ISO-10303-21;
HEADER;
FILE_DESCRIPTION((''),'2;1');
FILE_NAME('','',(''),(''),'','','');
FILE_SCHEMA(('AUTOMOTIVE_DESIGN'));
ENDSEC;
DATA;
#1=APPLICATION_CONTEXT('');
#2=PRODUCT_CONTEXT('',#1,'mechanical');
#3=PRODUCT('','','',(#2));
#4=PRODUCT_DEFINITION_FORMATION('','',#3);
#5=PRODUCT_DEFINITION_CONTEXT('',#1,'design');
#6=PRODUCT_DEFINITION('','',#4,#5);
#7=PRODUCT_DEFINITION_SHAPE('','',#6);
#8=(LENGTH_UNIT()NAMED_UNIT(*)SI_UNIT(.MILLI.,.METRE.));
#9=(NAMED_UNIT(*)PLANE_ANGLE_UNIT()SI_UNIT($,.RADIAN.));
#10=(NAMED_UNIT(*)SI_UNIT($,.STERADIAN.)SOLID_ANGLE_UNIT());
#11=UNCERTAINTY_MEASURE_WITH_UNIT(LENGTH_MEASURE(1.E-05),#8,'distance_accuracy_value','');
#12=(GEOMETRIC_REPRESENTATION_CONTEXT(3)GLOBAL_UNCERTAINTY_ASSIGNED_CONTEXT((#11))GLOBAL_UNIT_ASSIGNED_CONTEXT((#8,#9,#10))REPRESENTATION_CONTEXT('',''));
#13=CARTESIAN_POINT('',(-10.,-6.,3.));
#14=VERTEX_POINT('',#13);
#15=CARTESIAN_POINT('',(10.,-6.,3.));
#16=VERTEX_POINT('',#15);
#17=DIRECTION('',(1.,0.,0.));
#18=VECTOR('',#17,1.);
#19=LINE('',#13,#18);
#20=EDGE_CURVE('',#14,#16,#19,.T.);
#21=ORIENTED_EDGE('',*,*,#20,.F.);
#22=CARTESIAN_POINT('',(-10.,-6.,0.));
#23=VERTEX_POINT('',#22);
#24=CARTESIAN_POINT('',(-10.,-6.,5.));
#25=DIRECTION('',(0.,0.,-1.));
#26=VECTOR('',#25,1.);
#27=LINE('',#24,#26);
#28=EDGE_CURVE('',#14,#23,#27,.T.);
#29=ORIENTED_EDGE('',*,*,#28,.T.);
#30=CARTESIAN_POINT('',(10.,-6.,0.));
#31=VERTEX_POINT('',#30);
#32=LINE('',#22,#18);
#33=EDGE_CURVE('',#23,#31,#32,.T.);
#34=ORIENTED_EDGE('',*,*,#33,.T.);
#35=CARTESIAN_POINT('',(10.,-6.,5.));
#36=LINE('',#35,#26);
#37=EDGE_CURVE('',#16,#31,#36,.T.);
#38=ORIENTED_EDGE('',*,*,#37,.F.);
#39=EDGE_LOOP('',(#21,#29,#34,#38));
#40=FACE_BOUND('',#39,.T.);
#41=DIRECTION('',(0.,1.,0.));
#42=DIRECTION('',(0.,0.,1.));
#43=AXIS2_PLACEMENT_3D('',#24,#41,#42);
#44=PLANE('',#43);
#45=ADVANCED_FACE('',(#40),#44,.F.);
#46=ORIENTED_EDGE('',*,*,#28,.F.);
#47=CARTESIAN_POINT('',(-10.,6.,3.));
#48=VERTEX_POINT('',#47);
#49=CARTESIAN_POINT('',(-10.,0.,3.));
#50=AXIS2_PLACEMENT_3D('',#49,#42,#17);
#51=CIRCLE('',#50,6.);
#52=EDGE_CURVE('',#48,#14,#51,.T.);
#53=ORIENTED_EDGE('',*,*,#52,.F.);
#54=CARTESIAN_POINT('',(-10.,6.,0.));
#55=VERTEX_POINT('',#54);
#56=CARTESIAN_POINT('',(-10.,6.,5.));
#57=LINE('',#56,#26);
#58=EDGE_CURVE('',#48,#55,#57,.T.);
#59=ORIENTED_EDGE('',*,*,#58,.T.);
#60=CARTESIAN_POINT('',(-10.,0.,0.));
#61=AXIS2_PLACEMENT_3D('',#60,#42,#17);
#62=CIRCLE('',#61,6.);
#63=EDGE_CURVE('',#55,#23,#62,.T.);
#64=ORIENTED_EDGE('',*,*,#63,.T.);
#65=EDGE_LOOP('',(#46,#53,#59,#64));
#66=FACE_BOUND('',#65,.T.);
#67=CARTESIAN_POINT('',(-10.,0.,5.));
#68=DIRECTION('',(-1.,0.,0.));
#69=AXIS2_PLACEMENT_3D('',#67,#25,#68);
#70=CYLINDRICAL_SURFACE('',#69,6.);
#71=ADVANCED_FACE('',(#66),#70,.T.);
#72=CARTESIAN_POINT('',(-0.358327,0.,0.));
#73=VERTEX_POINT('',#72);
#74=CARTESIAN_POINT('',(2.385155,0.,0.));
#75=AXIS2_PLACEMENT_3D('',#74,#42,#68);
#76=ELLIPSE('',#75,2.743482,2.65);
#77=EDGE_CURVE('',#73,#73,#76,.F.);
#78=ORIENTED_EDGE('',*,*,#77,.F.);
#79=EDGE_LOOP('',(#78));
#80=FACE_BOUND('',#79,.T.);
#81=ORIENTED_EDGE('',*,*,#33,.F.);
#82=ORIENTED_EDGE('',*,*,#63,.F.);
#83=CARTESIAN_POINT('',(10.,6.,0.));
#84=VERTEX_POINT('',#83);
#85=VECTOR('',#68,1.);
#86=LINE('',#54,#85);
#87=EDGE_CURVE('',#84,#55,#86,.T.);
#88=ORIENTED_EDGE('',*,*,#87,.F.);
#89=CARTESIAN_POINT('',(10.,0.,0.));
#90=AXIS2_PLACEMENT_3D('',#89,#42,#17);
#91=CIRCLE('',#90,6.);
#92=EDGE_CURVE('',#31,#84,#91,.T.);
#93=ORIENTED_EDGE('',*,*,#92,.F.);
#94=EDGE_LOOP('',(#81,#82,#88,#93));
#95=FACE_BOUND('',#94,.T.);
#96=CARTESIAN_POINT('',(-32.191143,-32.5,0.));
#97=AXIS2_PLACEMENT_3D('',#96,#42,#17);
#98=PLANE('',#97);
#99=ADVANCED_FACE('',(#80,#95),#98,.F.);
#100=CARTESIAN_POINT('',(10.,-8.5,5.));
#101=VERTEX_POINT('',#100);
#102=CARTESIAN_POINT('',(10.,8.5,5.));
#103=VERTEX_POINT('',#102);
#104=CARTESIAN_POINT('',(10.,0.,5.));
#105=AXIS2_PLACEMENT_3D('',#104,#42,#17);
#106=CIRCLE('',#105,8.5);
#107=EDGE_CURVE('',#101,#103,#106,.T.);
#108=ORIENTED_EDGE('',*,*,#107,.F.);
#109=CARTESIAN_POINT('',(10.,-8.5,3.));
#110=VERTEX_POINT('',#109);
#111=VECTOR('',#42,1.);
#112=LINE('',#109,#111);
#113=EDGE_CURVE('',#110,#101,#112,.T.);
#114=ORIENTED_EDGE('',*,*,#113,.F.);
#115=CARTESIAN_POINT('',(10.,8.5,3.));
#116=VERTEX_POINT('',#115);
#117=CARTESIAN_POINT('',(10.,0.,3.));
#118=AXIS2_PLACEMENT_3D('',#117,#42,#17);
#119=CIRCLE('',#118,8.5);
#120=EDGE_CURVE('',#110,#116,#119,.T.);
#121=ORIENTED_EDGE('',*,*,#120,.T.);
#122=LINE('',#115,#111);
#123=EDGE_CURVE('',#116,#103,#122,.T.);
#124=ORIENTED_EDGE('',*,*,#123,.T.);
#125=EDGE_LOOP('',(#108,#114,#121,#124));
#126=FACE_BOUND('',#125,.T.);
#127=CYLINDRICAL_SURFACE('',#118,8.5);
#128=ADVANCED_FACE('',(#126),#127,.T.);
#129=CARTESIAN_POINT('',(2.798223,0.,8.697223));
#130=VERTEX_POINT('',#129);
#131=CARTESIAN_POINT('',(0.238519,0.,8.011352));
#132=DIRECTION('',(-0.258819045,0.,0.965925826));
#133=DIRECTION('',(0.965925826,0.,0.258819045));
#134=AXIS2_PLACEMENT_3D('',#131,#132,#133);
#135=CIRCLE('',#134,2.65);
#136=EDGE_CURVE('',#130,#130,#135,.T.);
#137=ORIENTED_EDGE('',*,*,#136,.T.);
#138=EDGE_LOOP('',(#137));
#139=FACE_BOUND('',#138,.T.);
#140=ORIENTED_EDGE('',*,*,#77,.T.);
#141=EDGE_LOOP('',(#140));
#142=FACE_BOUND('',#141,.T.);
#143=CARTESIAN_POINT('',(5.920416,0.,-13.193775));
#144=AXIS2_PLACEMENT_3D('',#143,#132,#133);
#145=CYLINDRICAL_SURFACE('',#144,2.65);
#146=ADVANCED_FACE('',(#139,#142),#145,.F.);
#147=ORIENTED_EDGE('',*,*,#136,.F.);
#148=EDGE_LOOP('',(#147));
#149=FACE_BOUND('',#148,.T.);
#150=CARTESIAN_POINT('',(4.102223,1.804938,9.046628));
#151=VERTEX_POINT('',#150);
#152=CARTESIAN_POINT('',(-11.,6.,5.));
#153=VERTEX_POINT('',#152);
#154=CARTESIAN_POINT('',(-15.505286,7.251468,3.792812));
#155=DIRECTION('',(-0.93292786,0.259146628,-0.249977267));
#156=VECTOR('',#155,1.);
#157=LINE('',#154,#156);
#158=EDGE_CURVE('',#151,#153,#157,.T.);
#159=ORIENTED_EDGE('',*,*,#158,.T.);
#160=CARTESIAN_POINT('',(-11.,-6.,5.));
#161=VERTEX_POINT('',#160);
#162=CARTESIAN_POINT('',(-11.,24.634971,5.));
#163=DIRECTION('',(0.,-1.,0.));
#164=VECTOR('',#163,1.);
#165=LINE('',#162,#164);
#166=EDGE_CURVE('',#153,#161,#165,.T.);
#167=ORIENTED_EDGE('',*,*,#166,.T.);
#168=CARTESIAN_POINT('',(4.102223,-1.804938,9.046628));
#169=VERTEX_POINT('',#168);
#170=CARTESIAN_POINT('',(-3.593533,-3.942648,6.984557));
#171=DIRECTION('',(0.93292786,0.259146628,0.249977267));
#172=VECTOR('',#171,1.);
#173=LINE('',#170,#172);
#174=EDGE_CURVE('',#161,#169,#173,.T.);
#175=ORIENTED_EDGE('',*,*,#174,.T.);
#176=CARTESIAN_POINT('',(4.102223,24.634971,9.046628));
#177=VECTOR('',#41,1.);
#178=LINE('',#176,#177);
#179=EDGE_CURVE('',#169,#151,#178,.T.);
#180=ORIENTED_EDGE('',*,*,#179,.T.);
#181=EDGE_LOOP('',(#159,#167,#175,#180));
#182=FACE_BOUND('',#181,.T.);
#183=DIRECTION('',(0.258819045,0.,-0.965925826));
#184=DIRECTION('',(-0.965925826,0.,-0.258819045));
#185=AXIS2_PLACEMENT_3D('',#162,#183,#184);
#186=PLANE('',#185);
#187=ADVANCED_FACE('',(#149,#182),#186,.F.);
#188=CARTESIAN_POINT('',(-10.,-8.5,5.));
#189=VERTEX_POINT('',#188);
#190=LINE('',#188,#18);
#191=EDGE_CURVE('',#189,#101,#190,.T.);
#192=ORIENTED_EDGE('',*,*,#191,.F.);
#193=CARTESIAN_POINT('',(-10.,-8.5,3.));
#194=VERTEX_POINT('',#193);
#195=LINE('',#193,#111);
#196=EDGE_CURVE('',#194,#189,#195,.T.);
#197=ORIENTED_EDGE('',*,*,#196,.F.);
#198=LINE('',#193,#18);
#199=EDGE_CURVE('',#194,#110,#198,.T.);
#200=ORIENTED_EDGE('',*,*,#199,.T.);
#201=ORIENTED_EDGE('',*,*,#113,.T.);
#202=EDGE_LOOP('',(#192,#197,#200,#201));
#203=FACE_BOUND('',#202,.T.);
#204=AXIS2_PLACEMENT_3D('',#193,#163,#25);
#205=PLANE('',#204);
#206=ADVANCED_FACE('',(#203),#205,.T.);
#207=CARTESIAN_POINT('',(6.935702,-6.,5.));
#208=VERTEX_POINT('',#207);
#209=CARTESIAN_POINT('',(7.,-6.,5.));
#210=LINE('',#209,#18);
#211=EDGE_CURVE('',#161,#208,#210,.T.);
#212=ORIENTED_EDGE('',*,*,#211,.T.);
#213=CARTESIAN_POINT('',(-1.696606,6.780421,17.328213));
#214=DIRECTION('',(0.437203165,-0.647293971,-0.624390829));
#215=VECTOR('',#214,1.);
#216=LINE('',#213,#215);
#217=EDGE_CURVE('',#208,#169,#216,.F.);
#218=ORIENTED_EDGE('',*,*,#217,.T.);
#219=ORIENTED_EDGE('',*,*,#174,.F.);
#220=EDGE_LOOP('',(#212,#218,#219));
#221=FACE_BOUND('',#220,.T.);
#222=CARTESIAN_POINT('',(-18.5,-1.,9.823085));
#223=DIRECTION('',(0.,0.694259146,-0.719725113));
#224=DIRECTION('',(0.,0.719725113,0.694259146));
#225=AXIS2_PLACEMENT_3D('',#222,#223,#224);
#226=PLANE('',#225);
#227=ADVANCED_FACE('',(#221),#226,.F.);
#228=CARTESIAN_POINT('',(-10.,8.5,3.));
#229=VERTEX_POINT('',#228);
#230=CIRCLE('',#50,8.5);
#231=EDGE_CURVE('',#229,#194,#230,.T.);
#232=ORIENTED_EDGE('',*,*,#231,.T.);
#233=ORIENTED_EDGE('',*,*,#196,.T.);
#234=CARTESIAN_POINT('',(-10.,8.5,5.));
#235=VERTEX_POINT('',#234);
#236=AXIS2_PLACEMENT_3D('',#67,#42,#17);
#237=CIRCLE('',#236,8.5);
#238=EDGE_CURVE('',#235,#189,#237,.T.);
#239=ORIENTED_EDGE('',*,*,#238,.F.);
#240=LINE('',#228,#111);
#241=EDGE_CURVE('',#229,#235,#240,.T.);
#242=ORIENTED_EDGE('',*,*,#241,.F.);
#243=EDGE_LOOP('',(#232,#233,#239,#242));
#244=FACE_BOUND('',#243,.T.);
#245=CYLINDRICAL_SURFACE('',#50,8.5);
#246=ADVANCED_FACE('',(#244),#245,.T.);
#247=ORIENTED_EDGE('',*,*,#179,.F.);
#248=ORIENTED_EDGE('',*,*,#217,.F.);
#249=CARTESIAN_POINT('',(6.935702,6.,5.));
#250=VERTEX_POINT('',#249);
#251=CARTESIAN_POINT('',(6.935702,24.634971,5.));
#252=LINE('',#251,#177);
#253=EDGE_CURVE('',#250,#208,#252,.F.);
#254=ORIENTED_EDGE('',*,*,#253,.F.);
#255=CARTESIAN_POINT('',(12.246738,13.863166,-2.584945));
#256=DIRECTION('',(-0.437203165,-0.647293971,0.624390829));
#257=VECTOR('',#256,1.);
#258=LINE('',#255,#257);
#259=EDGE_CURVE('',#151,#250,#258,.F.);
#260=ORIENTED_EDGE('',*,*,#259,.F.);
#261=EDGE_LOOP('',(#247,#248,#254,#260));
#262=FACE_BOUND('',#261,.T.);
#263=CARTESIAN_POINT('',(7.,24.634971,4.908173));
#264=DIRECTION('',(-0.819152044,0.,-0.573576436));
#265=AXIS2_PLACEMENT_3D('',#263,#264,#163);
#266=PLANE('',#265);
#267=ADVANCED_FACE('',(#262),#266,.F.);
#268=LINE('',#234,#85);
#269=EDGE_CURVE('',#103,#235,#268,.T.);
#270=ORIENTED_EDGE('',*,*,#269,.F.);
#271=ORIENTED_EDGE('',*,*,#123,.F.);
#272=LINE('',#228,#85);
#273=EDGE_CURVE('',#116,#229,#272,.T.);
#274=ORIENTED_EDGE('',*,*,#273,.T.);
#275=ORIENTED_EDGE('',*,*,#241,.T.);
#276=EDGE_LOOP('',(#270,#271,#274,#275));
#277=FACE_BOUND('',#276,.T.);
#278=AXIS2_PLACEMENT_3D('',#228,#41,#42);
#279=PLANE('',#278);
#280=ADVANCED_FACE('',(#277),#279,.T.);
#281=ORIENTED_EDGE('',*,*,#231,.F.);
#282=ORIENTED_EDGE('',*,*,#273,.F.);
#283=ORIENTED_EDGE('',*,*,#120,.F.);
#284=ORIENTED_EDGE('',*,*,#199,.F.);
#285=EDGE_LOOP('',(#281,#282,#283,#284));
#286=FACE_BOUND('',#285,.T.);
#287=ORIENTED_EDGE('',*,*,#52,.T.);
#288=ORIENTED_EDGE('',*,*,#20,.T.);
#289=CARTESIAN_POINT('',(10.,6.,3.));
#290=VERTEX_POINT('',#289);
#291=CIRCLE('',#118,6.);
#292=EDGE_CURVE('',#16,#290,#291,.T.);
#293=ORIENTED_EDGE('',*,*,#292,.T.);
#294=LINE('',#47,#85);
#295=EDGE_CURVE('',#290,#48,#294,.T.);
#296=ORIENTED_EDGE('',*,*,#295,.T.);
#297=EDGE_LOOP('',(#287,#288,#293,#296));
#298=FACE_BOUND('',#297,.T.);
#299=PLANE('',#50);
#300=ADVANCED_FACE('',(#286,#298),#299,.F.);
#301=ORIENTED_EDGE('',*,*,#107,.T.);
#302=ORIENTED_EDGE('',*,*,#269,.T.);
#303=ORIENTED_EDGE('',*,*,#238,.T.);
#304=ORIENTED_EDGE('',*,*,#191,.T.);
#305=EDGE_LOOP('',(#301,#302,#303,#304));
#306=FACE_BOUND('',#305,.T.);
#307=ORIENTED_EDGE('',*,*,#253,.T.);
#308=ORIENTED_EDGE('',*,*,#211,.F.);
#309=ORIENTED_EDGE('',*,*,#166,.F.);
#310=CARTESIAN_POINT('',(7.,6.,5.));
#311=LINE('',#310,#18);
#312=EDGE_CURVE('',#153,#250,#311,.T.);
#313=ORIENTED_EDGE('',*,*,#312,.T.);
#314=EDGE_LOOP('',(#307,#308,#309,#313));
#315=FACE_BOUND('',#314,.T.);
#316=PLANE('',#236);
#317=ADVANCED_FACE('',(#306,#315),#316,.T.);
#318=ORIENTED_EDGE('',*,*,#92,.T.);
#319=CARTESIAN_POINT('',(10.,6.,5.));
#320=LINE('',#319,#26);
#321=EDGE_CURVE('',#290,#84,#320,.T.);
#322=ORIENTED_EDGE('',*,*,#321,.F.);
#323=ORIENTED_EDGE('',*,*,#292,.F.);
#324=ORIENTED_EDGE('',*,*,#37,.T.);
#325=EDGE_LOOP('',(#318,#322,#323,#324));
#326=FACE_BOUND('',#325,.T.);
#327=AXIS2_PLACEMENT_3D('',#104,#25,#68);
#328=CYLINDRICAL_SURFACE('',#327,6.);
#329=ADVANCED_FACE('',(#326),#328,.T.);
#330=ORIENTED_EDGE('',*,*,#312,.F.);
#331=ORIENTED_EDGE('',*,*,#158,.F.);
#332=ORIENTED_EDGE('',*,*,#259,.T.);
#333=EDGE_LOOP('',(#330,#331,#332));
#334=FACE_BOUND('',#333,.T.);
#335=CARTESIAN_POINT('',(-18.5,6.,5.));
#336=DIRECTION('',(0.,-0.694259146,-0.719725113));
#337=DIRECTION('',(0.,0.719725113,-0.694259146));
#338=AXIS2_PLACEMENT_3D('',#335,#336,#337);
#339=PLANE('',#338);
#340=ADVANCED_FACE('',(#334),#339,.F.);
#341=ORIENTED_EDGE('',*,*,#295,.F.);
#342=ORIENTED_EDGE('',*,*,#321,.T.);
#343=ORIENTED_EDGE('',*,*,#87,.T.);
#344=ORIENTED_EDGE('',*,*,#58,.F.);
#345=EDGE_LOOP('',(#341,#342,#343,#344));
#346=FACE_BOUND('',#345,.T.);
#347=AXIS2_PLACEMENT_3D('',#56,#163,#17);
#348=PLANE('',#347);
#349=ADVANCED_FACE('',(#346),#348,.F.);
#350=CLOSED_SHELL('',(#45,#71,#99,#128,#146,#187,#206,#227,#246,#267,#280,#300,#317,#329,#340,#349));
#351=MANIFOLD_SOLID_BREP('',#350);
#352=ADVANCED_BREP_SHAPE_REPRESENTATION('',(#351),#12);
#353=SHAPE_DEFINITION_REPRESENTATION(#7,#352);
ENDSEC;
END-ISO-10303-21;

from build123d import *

# Parameters (mm, degrees)
BOSS_EXTRUDE1_DEPTH             = 5
BOSS_EXTRUDE2_REACH             = 19.804
BOSS_EXTRUDE2_DIRECTION_2_REACH = 19.804
BOSS_EXTRUDE3_DEPTH             = 2
SKETCH4_R                       = 2.65
CUT_EXTRUDE1_DEPTH              = 29.091194779
SKETCH9_W                       = 64.865756982
SKETCH9_H                       = 28.956889813
CUT_EXTRUDE2_DEPTH              = 32.5
CUT_EXTRUDE3_DEPTH              = 29.618053883
CHAMFER3_SIZE                   = 3
CHAMFER3_SIZE_2                 = 4.914912266


with BuildPart() as part:
    # Sketch2 → Boss-Extrude1 (new, symmetric)
    with BuildSketch(Plane.XY):
        with BuildLine():
            Line((-10, 6), (10, 6))
            ThreePointArc((10, 6), (16, 0), (10, -6))
            Line((10, -6), (-10, -6))
            ThreePointArc((-10, -6), (-16, 0), (-10, 6))
        make_face()
    extrude(amount=BOSS_EXTRUDE1_DEPTH, both=True)

    # Boss-Extrude2: up to this face of the body (flat: up to its plane)
    boss_extrude2_end = Plane(part.part.faces().sort_by_distance((0, 6, 0))[0])
    # Sketch3 → Boss-Extrude2 (add, up to the picked face)
    with BuildSketch(Plane(origin=(0, 0, 0), x_dir=(1, 0, 0), z_dir=(0, 1, 0)), mode=Mode.PRIVATE) as boss_extrude2_sk1:
        Polygon((-5, 5), (-5, 9.823085464), (13, 5), align=None)
    boss_extrude2_tool1 = split(extrude(boss_extrude2_sk1.sketch, amount=BOSS_EXTRUDE2_REACH, mode=Mode.PRIVATE), bisect_by=boss_extrude2_end, keep=Keep.BOTH, mode=Mode.PRIVATE)
    # Sketch3 → Boss-Extrude2 (add, up to the picked face)
    with BuildSketch(Plane(origin=(0, 0, 0), x_dir=(1, 0, 0), z_dir=(0, 1, 0)), mode=Mode.PRIVATE) as boss_extrude2_sk2:
        Polygon((-11, -5), (7, -9.823085464), (7, -5), align=None)
    boss_extrude2_tool2 = split(extrude(boss_extrude2_sk2.sketch, amount=BOSS_EXTRUDE2_REACH, mode=Mode.PRIVATE), bisect_by=boss_extrude2_end, keep=Keep.BOTH, mode=Mode.PRIVATE)
    add(boss_extrude2_tool1.solids().sort_by(Axis((1, 0, -6.607695), (0, 1, 0)))[0])
    add(boss_extrude2_tool2.solids().sort_by(Axis((1, 0, 6.607695), (0, 1, 0)))[0])

    # Boss-Extrude2 direction 2: up to this face of the body (flat: up to its plane)
    boss_extrude2_direction_2_end = Plane(part.part.faces().sort_by_distance((0, -6, 0))[0])
    # Sketch3 → Boss-Extrude2 direction 2 (add, up to the picked face)
    with BuildSketch(Plane(origin=(0, 0, 0), x_dir=(1, 0, 0), z_dir=(0, 1, 0)), mode=Mode.PRIVATE) as boss_extrude2_direction_2_sk1:
        Polygon((-5, 5), (-5, 9.823085464), (13, 5), align=None)
    boss_extrude2_direction_2_tool1 = split(extrude(boss_extrude2_direction_2_sk1.sketch, amount=-BOSS_EXTRUDE2_DIRECTION_2_REACH, mode=Mode.PRIVATE), bisect_by=boss_extrude2_direction_2_end, keep=Keep.BOTH, mode=Mode.PRIVATE)
    # Sketch3 → Boss-Extrude2 direction 2 (add, up to the picked face)
    with BuildSketch(Plane(origin=(0, 0, 0), x_dir=(1, 0, 0), z_dir=(0, 1, 0)), mode=Mode.PRIVATE) as boss_extrude2_direction_2_sk2:
        Polygon((-11, -5), (7, -9.823085464), (7, -5), align=None)
    boss_extrude2_direction_2_tool2 = split(extrude(boss_extrude2_direction_2_sk2.sketch, amount=-BOSS_EXTRUDE2_DIRECTION_2_REACH, mode=Mode.PRIVATE), bisect_by=boss_extrude2_direction_2_end, keep=Keep.BOTH, mode=Mode.PRIVATE)
    add(boss_extrude2_direction_2_tool1.solids().sort_by(Axis((1, 0, -6.607695), (0, -1, 0)))[0])
    add(boss_extrude2_direction_2_tool2.solids().sort_by(Axis((1, 0, 6.607695), (0, -1, 0)))[0])

    # Sketch8 → Boss-Extrude3 (add)
    with BuildSketch(Plane.XY.offset(5)):
        with BuildLine():
            Line((-10, 8.5), (10, 8.5))
            ThreePointArc((10, 8.5), (18.5, 0), (10, -8.5))
            Line((10, -8.5), (-10, -8.5))
            ThreePointArc((-10, -8.5), (-18.5, 0), (-10, 8.5))
        make_face()
    boss_extrude3 = extrude(amount=-BOSS_EXTRUDE3_DEPTH)

    # Mirror1: Boss-Extrude3 across plane
    add(boss_extrude3.mirror(Plane.XY))

    # Sketch4 → Cut-Extrude1 (cut, through all)
    with BuildSketch(Plane(origin=(-1.986860279, 0, 7.415063509), x_dir=(0.96592582628907, 0, 0.25881904510251436), z_dir=(-0.25881904510251436, 0, 0.96592582628907))):
        with Locations((2.303882384, 0)):
            Circle(SKETCH4_R)
    extrude(amount=-CUT_EXTRUDE1_DEPTH, mode=Mode.SUBTRACT)

    # Sketch9 → Cut-Extrude2 (cut, symmetric)
    with BuildSketch(Plane(origin=(0, 0, 0), x_dir=(1, 0, 0), z_dir=(0, 1, 0))):
        with Locations((0.241735823, 14.478444907)):
            Rectangle(SKETCH9_W, SKETCH9_H)
    extrude(amount=CUT_EXTRUDE2_DEPTH, both=True, mode=Mode.SUBTRACT)

    # Sketch10 → Cut-Extrude3 (cut, through all)
    with BuildSketch(Plane(origin=(7, 0, 0), x_dir=(0, 0, -1), z_dir=(1, 0, 0))):
        Polygon((-5, 6), (-9.823085464, 1), (-9.823085464, -1), (-5, -6), (-15.161694792, -6), (-15.161694792, 6), align=None)
    extrude(amount=-CUT_EXTRUDE3_DEPTH, mode=Mode.SUBTRACT)

    # Chamfer3
    # the kernel refuses this chamfer: 4.914912266, 3 mm, written as the material it takes off along each edge
    with BuildSketch(Plane(origin=(7, 13.693017634, 9.823085464), x_dir=(-0.9797390561393613, 0, -0.2002782611147635), z_dir=(0, -1, 0))) as chamfer3_piece_1_section:
        Polygon((CHAMFER3_SIZE * 0.998191085646, CHAMFER3_SIZE * 0.0601211821046), (CHAMFER3_SIZE_2 * 0.200278261104, CHAMFER3_SIZE_2 * 0.979739056086), (0, 0), align=None)
    chamfer3_piece_1 = extrude(amount=27.386035267, mode=Mode.PRIVATE)
    chamfer3_piece_1 = split(chamfer3_piece_1, bisect_by=Plane(origin=(6.06140933, 0, 5), z_dir=(0, 0, 1)), keep=Keep.TOP, mode=Mode.PRIVATE)
    add(chamfer3_piece_1, mode=Mode.SUBTRACT)


solid = part.part
